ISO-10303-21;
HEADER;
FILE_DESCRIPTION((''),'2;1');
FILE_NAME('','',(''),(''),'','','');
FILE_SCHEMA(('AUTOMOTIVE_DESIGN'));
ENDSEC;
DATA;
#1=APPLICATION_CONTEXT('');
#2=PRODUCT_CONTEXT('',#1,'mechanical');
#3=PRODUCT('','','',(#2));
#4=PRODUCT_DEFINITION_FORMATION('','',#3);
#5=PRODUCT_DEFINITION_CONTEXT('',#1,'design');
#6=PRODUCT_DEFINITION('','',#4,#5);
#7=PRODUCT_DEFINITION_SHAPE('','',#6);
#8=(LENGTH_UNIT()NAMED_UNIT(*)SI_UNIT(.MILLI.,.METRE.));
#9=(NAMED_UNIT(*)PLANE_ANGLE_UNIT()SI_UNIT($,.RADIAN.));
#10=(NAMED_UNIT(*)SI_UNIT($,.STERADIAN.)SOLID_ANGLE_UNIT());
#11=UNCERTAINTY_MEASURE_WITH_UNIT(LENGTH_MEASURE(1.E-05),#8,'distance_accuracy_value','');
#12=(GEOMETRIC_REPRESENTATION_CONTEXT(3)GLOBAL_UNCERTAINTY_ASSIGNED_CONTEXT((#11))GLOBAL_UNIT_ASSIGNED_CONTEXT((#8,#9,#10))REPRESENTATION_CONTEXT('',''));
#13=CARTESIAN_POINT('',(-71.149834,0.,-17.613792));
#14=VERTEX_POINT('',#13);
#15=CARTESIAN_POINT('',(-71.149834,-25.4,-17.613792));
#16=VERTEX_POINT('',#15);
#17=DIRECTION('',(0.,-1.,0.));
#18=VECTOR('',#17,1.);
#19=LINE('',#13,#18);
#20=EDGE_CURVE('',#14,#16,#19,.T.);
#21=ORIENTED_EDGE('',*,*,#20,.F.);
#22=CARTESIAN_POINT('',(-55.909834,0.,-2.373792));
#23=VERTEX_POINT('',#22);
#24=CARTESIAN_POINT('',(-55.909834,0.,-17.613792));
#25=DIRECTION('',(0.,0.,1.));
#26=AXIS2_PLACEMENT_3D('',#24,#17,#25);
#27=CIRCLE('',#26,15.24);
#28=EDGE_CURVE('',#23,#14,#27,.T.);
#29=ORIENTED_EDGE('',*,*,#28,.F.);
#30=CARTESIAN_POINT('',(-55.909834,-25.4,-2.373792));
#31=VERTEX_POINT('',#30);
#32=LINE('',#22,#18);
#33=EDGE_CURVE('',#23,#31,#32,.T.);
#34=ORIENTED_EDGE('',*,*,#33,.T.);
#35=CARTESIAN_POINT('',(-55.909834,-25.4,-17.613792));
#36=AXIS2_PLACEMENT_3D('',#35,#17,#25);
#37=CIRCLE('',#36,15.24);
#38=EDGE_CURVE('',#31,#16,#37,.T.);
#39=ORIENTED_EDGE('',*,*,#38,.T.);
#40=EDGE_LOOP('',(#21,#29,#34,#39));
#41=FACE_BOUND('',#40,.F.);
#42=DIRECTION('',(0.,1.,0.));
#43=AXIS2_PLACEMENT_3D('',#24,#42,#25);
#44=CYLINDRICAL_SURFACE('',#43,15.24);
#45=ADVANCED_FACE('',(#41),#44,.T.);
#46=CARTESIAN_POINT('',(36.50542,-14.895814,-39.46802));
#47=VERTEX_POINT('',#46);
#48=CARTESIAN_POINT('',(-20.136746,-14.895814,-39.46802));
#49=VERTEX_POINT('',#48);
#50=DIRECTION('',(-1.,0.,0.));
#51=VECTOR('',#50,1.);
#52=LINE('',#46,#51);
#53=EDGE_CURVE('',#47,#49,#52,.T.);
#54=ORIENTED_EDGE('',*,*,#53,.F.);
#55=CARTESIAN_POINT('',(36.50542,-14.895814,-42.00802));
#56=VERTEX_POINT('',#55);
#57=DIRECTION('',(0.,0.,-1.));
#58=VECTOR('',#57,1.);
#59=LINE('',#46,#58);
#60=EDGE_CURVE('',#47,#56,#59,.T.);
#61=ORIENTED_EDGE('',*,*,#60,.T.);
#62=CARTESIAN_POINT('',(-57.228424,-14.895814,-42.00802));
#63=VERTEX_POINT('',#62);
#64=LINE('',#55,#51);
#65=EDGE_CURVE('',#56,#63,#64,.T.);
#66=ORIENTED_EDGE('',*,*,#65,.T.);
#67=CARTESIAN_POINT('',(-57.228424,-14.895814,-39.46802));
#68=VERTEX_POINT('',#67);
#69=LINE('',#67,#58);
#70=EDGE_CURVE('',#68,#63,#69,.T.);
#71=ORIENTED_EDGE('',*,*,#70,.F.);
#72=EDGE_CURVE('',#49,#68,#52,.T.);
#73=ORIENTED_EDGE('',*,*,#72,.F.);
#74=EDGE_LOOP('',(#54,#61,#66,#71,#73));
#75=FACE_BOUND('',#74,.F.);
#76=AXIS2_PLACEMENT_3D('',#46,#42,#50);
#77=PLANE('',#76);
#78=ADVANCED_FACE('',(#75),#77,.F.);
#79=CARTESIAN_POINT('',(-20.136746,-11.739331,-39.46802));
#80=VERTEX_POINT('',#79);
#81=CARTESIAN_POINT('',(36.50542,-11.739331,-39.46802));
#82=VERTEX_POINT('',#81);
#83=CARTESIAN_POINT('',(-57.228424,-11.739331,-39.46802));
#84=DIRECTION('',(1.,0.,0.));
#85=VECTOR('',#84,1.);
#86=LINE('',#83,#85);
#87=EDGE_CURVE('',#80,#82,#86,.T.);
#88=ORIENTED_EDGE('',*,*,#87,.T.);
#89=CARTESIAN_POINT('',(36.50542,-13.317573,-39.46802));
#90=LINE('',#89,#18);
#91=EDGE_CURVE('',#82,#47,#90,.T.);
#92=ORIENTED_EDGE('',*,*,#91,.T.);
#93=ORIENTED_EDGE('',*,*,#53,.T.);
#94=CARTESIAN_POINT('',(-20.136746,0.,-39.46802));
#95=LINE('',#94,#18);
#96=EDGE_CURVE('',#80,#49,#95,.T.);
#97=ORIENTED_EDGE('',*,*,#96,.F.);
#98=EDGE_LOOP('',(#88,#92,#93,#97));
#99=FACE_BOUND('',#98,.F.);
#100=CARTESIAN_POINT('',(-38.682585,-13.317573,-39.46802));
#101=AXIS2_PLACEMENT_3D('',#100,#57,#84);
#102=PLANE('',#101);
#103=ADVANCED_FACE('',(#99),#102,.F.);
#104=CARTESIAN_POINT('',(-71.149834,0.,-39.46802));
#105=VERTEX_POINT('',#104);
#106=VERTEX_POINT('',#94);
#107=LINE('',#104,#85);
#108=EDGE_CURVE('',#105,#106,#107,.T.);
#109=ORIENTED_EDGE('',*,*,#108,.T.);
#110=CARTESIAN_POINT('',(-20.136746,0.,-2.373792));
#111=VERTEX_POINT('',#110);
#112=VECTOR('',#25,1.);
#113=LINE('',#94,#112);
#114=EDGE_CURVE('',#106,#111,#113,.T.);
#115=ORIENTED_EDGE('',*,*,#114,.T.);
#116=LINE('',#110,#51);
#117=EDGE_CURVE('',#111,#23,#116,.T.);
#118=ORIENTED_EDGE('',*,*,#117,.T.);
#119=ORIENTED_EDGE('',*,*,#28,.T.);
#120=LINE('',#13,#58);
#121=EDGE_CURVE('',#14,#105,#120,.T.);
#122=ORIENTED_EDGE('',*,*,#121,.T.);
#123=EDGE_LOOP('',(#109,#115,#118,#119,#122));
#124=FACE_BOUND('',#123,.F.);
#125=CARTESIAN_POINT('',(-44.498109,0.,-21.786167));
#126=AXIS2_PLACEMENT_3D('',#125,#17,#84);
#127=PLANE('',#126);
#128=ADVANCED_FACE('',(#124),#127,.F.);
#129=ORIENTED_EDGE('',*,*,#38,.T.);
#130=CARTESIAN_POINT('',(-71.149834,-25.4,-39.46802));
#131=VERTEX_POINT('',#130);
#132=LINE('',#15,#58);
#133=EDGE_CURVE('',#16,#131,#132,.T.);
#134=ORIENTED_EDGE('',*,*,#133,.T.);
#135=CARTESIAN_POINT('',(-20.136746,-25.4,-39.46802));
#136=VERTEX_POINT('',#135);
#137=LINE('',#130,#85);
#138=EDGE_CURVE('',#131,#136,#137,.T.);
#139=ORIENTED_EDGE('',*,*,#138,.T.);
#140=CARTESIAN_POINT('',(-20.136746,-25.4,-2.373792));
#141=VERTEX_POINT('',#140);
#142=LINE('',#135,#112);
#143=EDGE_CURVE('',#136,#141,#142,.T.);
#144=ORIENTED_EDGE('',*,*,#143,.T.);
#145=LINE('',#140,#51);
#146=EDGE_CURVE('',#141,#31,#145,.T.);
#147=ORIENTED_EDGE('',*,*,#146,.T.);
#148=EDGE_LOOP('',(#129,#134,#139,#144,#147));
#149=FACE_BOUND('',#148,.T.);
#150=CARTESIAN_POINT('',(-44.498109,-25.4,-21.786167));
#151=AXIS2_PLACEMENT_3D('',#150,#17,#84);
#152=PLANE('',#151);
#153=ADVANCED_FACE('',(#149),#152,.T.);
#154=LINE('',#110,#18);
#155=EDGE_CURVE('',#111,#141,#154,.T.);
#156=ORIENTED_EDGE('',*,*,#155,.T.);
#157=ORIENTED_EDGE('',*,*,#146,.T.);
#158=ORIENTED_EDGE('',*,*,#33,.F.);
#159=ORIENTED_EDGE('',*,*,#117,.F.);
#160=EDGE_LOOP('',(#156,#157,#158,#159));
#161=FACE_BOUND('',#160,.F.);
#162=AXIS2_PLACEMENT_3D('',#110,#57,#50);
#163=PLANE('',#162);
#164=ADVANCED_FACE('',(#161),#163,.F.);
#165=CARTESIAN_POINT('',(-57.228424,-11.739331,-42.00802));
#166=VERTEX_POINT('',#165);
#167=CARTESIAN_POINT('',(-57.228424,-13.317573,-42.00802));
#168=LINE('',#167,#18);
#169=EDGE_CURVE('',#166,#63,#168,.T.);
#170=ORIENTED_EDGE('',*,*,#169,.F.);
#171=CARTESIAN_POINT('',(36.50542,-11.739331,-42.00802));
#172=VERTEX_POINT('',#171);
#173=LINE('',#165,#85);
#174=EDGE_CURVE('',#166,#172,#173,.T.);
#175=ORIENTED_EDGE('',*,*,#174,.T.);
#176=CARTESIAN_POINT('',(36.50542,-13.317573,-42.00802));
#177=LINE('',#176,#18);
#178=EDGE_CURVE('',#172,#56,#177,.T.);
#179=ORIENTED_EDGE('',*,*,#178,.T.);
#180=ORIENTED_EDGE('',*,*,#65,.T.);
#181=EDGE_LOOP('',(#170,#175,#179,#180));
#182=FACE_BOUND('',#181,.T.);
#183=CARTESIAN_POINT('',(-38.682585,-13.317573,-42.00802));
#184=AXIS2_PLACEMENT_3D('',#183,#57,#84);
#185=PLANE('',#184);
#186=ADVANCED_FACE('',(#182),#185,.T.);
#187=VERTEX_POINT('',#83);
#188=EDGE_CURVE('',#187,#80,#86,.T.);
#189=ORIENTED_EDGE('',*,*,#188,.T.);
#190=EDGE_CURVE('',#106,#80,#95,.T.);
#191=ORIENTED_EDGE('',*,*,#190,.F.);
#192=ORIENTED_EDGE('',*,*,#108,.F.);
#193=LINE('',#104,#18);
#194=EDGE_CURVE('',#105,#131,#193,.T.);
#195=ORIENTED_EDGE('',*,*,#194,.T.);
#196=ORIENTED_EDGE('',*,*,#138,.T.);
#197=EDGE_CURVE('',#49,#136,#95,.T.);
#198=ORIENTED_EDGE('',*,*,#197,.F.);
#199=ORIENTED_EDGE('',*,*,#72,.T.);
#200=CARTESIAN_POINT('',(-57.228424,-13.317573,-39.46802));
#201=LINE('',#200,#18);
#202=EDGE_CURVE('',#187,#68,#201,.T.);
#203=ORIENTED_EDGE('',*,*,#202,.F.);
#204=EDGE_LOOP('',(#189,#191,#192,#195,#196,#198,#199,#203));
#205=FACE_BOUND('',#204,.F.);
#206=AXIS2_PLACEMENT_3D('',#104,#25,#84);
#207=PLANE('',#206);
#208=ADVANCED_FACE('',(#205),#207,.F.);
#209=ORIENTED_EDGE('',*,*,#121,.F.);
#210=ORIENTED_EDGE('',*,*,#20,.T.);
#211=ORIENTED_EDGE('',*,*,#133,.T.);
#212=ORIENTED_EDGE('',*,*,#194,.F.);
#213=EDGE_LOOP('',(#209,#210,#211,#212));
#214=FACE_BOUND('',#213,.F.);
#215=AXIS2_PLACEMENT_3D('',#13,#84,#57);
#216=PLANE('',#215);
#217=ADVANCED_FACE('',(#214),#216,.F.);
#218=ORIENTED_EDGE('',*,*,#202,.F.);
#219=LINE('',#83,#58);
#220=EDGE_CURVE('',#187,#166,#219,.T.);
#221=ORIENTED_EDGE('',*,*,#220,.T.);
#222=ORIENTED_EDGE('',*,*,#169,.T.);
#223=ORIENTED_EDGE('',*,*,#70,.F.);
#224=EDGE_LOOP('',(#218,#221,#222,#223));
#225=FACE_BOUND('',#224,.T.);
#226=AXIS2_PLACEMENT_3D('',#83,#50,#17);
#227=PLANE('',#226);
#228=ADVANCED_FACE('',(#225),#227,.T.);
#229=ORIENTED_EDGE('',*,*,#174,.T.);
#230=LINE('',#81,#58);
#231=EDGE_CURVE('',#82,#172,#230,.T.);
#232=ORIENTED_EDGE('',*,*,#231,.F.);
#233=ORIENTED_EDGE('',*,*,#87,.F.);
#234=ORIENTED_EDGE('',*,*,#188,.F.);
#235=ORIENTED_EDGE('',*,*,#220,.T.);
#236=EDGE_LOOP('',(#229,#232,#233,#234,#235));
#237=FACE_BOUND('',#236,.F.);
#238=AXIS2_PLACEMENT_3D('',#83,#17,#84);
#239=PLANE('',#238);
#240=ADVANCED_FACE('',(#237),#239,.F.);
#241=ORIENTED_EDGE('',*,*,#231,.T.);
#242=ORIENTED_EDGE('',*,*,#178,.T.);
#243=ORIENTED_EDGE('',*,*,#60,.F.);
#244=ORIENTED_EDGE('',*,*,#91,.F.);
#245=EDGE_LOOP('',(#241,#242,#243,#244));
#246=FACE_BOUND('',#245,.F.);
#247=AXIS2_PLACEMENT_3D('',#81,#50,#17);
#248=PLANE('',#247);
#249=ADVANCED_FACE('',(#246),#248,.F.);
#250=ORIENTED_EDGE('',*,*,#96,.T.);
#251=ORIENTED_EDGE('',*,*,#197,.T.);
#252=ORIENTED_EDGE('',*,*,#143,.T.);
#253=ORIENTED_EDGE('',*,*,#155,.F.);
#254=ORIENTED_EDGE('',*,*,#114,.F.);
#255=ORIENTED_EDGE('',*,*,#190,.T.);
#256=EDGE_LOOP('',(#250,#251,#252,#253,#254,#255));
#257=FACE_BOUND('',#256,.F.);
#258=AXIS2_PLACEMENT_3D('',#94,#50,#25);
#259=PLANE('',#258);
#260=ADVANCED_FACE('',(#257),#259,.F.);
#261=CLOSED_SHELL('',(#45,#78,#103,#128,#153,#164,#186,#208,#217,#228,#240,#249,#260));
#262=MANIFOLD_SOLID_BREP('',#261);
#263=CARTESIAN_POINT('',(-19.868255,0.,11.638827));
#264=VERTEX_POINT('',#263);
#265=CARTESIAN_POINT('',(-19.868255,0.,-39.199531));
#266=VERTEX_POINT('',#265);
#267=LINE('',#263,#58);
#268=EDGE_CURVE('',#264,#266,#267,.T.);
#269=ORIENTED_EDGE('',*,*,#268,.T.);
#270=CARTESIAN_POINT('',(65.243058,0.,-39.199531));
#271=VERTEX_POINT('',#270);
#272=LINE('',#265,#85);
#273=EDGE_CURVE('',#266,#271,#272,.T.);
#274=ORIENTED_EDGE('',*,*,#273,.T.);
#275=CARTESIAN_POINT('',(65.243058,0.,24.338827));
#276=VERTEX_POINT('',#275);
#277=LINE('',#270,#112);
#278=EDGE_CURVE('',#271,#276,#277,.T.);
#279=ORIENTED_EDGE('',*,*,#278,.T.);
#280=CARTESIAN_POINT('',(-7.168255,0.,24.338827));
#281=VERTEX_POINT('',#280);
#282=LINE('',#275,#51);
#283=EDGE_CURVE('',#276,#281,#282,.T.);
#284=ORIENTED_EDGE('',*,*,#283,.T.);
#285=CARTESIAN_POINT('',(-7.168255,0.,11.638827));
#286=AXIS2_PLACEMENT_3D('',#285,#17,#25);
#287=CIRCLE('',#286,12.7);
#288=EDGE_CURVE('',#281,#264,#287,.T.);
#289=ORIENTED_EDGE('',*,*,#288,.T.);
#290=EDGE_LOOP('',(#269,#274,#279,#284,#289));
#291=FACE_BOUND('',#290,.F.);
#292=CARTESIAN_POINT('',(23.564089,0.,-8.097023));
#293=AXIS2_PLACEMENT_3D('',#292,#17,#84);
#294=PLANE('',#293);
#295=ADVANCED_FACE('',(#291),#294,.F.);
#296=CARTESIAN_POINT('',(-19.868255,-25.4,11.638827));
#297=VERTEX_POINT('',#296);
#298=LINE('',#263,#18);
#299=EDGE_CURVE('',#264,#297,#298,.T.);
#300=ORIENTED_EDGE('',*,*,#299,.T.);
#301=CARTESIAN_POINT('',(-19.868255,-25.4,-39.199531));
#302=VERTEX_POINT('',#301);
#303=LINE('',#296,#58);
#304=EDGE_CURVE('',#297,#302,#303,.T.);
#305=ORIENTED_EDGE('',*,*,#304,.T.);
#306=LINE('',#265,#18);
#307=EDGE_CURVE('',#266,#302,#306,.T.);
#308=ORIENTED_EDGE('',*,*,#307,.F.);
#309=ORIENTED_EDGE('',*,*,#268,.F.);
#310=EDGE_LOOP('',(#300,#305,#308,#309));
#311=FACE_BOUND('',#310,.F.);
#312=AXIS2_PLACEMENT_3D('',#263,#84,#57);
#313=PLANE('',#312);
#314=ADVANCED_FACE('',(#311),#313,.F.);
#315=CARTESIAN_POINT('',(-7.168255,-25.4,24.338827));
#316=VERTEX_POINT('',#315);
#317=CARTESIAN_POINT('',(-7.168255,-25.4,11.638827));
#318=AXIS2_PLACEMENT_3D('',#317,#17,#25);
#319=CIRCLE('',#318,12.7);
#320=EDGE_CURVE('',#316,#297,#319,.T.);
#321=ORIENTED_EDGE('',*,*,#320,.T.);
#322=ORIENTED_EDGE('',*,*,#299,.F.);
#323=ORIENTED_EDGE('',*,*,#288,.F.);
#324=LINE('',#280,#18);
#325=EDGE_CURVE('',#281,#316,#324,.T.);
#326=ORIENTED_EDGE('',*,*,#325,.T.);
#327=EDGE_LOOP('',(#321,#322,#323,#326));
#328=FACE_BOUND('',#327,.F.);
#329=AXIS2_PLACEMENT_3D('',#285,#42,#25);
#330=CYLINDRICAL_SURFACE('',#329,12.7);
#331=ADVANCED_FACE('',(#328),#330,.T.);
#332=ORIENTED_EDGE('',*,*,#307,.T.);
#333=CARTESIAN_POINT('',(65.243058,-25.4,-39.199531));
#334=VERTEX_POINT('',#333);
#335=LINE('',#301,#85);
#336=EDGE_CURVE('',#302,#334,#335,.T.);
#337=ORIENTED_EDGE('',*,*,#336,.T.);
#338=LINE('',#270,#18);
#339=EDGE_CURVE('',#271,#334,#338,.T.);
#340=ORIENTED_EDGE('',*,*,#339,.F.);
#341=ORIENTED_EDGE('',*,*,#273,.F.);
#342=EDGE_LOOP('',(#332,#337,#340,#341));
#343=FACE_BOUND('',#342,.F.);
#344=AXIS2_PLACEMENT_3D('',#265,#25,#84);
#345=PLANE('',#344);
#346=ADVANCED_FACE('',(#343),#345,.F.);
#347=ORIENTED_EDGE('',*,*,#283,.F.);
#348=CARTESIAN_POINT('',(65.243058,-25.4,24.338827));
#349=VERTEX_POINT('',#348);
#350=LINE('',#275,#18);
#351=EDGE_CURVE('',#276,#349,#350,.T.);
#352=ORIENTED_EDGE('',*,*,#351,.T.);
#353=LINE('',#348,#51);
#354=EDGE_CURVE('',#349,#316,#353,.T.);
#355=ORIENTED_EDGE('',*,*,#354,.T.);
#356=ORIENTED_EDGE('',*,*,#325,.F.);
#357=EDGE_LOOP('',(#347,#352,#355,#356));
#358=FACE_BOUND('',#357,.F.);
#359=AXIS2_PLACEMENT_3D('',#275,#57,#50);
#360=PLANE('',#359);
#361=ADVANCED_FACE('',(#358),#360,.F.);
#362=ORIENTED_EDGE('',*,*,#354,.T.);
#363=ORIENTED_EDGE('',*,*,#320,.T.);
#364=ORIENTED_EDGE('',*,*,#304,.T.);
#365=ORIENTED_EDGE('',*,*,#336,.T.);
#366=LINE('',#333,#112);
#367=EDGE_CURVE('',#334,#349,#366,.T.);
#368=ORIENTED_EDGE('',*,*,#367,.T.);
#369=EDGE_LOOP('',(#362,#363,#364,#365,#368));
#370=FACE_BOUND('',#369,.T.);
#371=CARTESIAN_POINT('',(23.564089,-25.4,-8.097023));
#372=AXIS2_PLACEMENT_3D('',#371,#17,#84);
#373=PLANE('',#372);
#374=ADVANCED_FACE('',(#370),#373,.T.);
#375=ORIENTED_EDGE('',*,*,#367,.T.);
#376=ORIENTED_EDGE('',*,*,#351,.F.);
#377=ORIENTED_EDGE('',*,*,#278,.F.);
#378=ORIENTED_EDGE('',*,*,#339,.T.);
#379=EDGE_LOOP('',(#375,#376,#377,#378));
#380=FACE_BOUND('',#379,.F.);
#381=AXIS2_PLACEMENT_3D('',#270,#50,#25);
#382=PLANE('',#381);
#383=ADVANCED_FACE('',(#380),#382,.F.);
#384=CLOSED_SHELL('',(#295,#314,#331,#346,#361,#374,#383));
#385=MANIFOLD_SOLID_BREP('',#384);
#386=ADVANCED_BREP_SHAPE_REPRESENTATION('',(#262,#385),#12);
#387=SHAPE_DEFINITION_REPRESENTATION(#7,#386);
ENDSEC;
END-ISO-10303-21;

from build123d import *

# Parameters (mm, degrees)
F2_DEPTH = 25.4
F3_DEPTH = 25.4
F7_W     = 37.0916780084
F7_H     = 3.1564831734
F7_W_2   = 56.6421654075
F8_DEPTH = 2.54


# Not quite as in the source:
# - the program builds the solid bodies; features that only make, move or delete a surface that nothing else refers to are left out


with BuildPart() as f2:
    # F0 (on Front) → F2 (new body)
    with BuildSketch(Plane.XZ):
        with BuildLine():
            Line((65.2430579066, 24.3388270795), (-7.1682546616, 24.3388270795))
            ThreePointArc((-7.1682546616, 24.3388270795), (-16.1485107826, 20.6190832006), (-19.8682546616, 11.6388270795))
            Line((-19.8682546616, 11.6388270795), (-19.8682546616, -39.1995310783))
            Line((-19.8682546616, -39.1995310783), (65.2430579066, -39.1995310783))
            Line((65.2430579066, -39.1995310783), (65.2430579066, 24.3388270795))
        make_face()
    extrude(amount=F2_DEPTH)


with BuildPart() as f3:
    # F1 (on Front) → F3 (new body)
    with BuildSketch(Plane.XZ):
        with BuildLine():
            Line((-20.1367456466, -39.4680202007), (-20.1367456466, -2.3737917019))
            Line((-20.1367456466, -2.3737917019), (-55.9098335004, -2.3737917019))
            ThreePointArc((-55.9098335004, -2.3737917019), (-66.6861408457, -6.8374843567), (-71.1498335004, -17.6137917019))
            Line((-71.1498335004, -17.6137917019), (-71.1498335004, -39.4680202007))
            Line((-71.1498335004, -39.4680202007), (-20.1367456466, -39.4680202007))
        make_face()
    extrude(amount=F3_DEPTH)

    # F7 (on face) → F8 (join)
    with BuildSketch(Plane(origin=(0, 0, -39.4680202007), x_dir=(1, 0, 0), z_dir=(0, 0, -1))):
        with Locations((-38.6825846508, 13.3175728843)):
            Rectangle(F7_W, F7_H)
        with Locations((8.1843370572, 13.3175728843)):
            Rectangle(F7_W_2, F7_H)
    extrude(amount=F8_DEPTH)


solid = Compound([f2.part, f3.part])
